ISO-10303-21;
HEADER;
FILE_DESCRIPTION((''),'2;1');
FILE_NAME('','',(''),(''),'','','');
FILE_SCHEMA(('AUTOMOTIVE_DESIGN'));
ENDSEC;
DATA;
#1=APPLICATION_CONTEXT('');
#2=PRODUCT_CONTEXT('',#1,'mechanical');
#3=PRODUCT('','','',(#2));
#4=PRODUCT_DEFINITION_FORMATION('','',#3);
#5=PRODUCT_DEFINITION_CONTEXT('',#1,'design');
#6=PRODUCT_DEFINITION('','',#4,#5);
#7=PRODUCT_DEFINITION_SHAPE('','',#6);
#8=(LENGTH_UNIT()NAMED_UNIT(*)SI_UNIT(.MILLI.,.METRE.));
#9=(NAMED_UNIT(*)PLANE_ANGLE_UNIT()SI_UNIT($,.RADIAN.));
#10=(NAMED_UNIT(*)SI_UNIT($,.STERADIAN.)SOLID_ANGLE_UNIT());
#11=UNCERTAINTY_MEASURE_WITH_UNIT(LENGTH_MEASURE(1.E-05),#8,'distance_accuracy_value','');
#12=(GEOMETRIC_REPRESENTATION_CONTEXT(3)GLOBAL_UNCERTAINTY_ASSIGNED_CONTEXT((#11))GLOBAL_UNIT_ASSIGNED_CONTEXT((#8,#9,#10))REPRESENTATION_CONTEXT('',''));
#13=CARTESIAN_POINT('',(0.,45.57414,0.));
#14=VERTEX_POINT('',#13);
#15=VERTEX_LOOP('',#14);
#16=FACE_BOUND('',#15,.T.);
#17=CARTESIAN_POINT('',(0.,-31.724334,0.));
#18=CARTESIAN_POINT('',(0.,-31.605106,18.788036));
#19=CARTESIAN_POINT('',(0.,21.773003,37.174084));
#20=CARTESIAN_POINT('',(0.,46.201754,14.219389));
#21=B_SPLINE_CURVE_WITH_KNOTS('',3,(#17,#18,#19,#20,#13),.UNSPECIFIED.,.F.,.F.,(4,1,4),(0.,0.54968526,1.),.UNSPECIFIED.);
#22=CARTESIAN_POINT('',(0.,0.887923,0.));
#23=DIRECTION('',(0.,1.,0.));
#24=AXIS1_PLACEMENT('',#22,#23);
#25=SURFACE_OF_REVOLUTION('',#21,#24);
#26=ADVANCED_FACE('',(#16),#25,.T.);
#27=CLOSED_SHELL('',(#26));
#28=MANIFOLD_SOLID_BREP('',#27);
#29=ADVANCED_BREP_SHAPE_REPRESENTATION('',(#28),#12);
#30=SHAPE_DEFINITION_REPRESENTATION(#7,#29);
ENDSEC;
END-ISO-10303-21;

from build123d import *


with BuildPart() as f1:
    # F0 (on Right) → F1 (revolve)
    with BuildSketch(Plane.YZ):
        with BuildLine():
            add(Edge.make_bspline(
                [(-31.7243337631, 0), (-31.6051058471, 18.788035959), (21.7730031814, 37.1740843736), (46.2017537703, 14.2193894453), (45.5741398036, 0)],
                knots=[0, 0, 0, 0, 0.5496852598, 1, 1, 1, 1], degree=3))
            Line((-31.7243337631, 0), (45.5741398036, 0))
        make_face()
    revolve(axis=Axis((0, 0.8879229426, 0), (0, 1, 0)))


solid = f1.part
